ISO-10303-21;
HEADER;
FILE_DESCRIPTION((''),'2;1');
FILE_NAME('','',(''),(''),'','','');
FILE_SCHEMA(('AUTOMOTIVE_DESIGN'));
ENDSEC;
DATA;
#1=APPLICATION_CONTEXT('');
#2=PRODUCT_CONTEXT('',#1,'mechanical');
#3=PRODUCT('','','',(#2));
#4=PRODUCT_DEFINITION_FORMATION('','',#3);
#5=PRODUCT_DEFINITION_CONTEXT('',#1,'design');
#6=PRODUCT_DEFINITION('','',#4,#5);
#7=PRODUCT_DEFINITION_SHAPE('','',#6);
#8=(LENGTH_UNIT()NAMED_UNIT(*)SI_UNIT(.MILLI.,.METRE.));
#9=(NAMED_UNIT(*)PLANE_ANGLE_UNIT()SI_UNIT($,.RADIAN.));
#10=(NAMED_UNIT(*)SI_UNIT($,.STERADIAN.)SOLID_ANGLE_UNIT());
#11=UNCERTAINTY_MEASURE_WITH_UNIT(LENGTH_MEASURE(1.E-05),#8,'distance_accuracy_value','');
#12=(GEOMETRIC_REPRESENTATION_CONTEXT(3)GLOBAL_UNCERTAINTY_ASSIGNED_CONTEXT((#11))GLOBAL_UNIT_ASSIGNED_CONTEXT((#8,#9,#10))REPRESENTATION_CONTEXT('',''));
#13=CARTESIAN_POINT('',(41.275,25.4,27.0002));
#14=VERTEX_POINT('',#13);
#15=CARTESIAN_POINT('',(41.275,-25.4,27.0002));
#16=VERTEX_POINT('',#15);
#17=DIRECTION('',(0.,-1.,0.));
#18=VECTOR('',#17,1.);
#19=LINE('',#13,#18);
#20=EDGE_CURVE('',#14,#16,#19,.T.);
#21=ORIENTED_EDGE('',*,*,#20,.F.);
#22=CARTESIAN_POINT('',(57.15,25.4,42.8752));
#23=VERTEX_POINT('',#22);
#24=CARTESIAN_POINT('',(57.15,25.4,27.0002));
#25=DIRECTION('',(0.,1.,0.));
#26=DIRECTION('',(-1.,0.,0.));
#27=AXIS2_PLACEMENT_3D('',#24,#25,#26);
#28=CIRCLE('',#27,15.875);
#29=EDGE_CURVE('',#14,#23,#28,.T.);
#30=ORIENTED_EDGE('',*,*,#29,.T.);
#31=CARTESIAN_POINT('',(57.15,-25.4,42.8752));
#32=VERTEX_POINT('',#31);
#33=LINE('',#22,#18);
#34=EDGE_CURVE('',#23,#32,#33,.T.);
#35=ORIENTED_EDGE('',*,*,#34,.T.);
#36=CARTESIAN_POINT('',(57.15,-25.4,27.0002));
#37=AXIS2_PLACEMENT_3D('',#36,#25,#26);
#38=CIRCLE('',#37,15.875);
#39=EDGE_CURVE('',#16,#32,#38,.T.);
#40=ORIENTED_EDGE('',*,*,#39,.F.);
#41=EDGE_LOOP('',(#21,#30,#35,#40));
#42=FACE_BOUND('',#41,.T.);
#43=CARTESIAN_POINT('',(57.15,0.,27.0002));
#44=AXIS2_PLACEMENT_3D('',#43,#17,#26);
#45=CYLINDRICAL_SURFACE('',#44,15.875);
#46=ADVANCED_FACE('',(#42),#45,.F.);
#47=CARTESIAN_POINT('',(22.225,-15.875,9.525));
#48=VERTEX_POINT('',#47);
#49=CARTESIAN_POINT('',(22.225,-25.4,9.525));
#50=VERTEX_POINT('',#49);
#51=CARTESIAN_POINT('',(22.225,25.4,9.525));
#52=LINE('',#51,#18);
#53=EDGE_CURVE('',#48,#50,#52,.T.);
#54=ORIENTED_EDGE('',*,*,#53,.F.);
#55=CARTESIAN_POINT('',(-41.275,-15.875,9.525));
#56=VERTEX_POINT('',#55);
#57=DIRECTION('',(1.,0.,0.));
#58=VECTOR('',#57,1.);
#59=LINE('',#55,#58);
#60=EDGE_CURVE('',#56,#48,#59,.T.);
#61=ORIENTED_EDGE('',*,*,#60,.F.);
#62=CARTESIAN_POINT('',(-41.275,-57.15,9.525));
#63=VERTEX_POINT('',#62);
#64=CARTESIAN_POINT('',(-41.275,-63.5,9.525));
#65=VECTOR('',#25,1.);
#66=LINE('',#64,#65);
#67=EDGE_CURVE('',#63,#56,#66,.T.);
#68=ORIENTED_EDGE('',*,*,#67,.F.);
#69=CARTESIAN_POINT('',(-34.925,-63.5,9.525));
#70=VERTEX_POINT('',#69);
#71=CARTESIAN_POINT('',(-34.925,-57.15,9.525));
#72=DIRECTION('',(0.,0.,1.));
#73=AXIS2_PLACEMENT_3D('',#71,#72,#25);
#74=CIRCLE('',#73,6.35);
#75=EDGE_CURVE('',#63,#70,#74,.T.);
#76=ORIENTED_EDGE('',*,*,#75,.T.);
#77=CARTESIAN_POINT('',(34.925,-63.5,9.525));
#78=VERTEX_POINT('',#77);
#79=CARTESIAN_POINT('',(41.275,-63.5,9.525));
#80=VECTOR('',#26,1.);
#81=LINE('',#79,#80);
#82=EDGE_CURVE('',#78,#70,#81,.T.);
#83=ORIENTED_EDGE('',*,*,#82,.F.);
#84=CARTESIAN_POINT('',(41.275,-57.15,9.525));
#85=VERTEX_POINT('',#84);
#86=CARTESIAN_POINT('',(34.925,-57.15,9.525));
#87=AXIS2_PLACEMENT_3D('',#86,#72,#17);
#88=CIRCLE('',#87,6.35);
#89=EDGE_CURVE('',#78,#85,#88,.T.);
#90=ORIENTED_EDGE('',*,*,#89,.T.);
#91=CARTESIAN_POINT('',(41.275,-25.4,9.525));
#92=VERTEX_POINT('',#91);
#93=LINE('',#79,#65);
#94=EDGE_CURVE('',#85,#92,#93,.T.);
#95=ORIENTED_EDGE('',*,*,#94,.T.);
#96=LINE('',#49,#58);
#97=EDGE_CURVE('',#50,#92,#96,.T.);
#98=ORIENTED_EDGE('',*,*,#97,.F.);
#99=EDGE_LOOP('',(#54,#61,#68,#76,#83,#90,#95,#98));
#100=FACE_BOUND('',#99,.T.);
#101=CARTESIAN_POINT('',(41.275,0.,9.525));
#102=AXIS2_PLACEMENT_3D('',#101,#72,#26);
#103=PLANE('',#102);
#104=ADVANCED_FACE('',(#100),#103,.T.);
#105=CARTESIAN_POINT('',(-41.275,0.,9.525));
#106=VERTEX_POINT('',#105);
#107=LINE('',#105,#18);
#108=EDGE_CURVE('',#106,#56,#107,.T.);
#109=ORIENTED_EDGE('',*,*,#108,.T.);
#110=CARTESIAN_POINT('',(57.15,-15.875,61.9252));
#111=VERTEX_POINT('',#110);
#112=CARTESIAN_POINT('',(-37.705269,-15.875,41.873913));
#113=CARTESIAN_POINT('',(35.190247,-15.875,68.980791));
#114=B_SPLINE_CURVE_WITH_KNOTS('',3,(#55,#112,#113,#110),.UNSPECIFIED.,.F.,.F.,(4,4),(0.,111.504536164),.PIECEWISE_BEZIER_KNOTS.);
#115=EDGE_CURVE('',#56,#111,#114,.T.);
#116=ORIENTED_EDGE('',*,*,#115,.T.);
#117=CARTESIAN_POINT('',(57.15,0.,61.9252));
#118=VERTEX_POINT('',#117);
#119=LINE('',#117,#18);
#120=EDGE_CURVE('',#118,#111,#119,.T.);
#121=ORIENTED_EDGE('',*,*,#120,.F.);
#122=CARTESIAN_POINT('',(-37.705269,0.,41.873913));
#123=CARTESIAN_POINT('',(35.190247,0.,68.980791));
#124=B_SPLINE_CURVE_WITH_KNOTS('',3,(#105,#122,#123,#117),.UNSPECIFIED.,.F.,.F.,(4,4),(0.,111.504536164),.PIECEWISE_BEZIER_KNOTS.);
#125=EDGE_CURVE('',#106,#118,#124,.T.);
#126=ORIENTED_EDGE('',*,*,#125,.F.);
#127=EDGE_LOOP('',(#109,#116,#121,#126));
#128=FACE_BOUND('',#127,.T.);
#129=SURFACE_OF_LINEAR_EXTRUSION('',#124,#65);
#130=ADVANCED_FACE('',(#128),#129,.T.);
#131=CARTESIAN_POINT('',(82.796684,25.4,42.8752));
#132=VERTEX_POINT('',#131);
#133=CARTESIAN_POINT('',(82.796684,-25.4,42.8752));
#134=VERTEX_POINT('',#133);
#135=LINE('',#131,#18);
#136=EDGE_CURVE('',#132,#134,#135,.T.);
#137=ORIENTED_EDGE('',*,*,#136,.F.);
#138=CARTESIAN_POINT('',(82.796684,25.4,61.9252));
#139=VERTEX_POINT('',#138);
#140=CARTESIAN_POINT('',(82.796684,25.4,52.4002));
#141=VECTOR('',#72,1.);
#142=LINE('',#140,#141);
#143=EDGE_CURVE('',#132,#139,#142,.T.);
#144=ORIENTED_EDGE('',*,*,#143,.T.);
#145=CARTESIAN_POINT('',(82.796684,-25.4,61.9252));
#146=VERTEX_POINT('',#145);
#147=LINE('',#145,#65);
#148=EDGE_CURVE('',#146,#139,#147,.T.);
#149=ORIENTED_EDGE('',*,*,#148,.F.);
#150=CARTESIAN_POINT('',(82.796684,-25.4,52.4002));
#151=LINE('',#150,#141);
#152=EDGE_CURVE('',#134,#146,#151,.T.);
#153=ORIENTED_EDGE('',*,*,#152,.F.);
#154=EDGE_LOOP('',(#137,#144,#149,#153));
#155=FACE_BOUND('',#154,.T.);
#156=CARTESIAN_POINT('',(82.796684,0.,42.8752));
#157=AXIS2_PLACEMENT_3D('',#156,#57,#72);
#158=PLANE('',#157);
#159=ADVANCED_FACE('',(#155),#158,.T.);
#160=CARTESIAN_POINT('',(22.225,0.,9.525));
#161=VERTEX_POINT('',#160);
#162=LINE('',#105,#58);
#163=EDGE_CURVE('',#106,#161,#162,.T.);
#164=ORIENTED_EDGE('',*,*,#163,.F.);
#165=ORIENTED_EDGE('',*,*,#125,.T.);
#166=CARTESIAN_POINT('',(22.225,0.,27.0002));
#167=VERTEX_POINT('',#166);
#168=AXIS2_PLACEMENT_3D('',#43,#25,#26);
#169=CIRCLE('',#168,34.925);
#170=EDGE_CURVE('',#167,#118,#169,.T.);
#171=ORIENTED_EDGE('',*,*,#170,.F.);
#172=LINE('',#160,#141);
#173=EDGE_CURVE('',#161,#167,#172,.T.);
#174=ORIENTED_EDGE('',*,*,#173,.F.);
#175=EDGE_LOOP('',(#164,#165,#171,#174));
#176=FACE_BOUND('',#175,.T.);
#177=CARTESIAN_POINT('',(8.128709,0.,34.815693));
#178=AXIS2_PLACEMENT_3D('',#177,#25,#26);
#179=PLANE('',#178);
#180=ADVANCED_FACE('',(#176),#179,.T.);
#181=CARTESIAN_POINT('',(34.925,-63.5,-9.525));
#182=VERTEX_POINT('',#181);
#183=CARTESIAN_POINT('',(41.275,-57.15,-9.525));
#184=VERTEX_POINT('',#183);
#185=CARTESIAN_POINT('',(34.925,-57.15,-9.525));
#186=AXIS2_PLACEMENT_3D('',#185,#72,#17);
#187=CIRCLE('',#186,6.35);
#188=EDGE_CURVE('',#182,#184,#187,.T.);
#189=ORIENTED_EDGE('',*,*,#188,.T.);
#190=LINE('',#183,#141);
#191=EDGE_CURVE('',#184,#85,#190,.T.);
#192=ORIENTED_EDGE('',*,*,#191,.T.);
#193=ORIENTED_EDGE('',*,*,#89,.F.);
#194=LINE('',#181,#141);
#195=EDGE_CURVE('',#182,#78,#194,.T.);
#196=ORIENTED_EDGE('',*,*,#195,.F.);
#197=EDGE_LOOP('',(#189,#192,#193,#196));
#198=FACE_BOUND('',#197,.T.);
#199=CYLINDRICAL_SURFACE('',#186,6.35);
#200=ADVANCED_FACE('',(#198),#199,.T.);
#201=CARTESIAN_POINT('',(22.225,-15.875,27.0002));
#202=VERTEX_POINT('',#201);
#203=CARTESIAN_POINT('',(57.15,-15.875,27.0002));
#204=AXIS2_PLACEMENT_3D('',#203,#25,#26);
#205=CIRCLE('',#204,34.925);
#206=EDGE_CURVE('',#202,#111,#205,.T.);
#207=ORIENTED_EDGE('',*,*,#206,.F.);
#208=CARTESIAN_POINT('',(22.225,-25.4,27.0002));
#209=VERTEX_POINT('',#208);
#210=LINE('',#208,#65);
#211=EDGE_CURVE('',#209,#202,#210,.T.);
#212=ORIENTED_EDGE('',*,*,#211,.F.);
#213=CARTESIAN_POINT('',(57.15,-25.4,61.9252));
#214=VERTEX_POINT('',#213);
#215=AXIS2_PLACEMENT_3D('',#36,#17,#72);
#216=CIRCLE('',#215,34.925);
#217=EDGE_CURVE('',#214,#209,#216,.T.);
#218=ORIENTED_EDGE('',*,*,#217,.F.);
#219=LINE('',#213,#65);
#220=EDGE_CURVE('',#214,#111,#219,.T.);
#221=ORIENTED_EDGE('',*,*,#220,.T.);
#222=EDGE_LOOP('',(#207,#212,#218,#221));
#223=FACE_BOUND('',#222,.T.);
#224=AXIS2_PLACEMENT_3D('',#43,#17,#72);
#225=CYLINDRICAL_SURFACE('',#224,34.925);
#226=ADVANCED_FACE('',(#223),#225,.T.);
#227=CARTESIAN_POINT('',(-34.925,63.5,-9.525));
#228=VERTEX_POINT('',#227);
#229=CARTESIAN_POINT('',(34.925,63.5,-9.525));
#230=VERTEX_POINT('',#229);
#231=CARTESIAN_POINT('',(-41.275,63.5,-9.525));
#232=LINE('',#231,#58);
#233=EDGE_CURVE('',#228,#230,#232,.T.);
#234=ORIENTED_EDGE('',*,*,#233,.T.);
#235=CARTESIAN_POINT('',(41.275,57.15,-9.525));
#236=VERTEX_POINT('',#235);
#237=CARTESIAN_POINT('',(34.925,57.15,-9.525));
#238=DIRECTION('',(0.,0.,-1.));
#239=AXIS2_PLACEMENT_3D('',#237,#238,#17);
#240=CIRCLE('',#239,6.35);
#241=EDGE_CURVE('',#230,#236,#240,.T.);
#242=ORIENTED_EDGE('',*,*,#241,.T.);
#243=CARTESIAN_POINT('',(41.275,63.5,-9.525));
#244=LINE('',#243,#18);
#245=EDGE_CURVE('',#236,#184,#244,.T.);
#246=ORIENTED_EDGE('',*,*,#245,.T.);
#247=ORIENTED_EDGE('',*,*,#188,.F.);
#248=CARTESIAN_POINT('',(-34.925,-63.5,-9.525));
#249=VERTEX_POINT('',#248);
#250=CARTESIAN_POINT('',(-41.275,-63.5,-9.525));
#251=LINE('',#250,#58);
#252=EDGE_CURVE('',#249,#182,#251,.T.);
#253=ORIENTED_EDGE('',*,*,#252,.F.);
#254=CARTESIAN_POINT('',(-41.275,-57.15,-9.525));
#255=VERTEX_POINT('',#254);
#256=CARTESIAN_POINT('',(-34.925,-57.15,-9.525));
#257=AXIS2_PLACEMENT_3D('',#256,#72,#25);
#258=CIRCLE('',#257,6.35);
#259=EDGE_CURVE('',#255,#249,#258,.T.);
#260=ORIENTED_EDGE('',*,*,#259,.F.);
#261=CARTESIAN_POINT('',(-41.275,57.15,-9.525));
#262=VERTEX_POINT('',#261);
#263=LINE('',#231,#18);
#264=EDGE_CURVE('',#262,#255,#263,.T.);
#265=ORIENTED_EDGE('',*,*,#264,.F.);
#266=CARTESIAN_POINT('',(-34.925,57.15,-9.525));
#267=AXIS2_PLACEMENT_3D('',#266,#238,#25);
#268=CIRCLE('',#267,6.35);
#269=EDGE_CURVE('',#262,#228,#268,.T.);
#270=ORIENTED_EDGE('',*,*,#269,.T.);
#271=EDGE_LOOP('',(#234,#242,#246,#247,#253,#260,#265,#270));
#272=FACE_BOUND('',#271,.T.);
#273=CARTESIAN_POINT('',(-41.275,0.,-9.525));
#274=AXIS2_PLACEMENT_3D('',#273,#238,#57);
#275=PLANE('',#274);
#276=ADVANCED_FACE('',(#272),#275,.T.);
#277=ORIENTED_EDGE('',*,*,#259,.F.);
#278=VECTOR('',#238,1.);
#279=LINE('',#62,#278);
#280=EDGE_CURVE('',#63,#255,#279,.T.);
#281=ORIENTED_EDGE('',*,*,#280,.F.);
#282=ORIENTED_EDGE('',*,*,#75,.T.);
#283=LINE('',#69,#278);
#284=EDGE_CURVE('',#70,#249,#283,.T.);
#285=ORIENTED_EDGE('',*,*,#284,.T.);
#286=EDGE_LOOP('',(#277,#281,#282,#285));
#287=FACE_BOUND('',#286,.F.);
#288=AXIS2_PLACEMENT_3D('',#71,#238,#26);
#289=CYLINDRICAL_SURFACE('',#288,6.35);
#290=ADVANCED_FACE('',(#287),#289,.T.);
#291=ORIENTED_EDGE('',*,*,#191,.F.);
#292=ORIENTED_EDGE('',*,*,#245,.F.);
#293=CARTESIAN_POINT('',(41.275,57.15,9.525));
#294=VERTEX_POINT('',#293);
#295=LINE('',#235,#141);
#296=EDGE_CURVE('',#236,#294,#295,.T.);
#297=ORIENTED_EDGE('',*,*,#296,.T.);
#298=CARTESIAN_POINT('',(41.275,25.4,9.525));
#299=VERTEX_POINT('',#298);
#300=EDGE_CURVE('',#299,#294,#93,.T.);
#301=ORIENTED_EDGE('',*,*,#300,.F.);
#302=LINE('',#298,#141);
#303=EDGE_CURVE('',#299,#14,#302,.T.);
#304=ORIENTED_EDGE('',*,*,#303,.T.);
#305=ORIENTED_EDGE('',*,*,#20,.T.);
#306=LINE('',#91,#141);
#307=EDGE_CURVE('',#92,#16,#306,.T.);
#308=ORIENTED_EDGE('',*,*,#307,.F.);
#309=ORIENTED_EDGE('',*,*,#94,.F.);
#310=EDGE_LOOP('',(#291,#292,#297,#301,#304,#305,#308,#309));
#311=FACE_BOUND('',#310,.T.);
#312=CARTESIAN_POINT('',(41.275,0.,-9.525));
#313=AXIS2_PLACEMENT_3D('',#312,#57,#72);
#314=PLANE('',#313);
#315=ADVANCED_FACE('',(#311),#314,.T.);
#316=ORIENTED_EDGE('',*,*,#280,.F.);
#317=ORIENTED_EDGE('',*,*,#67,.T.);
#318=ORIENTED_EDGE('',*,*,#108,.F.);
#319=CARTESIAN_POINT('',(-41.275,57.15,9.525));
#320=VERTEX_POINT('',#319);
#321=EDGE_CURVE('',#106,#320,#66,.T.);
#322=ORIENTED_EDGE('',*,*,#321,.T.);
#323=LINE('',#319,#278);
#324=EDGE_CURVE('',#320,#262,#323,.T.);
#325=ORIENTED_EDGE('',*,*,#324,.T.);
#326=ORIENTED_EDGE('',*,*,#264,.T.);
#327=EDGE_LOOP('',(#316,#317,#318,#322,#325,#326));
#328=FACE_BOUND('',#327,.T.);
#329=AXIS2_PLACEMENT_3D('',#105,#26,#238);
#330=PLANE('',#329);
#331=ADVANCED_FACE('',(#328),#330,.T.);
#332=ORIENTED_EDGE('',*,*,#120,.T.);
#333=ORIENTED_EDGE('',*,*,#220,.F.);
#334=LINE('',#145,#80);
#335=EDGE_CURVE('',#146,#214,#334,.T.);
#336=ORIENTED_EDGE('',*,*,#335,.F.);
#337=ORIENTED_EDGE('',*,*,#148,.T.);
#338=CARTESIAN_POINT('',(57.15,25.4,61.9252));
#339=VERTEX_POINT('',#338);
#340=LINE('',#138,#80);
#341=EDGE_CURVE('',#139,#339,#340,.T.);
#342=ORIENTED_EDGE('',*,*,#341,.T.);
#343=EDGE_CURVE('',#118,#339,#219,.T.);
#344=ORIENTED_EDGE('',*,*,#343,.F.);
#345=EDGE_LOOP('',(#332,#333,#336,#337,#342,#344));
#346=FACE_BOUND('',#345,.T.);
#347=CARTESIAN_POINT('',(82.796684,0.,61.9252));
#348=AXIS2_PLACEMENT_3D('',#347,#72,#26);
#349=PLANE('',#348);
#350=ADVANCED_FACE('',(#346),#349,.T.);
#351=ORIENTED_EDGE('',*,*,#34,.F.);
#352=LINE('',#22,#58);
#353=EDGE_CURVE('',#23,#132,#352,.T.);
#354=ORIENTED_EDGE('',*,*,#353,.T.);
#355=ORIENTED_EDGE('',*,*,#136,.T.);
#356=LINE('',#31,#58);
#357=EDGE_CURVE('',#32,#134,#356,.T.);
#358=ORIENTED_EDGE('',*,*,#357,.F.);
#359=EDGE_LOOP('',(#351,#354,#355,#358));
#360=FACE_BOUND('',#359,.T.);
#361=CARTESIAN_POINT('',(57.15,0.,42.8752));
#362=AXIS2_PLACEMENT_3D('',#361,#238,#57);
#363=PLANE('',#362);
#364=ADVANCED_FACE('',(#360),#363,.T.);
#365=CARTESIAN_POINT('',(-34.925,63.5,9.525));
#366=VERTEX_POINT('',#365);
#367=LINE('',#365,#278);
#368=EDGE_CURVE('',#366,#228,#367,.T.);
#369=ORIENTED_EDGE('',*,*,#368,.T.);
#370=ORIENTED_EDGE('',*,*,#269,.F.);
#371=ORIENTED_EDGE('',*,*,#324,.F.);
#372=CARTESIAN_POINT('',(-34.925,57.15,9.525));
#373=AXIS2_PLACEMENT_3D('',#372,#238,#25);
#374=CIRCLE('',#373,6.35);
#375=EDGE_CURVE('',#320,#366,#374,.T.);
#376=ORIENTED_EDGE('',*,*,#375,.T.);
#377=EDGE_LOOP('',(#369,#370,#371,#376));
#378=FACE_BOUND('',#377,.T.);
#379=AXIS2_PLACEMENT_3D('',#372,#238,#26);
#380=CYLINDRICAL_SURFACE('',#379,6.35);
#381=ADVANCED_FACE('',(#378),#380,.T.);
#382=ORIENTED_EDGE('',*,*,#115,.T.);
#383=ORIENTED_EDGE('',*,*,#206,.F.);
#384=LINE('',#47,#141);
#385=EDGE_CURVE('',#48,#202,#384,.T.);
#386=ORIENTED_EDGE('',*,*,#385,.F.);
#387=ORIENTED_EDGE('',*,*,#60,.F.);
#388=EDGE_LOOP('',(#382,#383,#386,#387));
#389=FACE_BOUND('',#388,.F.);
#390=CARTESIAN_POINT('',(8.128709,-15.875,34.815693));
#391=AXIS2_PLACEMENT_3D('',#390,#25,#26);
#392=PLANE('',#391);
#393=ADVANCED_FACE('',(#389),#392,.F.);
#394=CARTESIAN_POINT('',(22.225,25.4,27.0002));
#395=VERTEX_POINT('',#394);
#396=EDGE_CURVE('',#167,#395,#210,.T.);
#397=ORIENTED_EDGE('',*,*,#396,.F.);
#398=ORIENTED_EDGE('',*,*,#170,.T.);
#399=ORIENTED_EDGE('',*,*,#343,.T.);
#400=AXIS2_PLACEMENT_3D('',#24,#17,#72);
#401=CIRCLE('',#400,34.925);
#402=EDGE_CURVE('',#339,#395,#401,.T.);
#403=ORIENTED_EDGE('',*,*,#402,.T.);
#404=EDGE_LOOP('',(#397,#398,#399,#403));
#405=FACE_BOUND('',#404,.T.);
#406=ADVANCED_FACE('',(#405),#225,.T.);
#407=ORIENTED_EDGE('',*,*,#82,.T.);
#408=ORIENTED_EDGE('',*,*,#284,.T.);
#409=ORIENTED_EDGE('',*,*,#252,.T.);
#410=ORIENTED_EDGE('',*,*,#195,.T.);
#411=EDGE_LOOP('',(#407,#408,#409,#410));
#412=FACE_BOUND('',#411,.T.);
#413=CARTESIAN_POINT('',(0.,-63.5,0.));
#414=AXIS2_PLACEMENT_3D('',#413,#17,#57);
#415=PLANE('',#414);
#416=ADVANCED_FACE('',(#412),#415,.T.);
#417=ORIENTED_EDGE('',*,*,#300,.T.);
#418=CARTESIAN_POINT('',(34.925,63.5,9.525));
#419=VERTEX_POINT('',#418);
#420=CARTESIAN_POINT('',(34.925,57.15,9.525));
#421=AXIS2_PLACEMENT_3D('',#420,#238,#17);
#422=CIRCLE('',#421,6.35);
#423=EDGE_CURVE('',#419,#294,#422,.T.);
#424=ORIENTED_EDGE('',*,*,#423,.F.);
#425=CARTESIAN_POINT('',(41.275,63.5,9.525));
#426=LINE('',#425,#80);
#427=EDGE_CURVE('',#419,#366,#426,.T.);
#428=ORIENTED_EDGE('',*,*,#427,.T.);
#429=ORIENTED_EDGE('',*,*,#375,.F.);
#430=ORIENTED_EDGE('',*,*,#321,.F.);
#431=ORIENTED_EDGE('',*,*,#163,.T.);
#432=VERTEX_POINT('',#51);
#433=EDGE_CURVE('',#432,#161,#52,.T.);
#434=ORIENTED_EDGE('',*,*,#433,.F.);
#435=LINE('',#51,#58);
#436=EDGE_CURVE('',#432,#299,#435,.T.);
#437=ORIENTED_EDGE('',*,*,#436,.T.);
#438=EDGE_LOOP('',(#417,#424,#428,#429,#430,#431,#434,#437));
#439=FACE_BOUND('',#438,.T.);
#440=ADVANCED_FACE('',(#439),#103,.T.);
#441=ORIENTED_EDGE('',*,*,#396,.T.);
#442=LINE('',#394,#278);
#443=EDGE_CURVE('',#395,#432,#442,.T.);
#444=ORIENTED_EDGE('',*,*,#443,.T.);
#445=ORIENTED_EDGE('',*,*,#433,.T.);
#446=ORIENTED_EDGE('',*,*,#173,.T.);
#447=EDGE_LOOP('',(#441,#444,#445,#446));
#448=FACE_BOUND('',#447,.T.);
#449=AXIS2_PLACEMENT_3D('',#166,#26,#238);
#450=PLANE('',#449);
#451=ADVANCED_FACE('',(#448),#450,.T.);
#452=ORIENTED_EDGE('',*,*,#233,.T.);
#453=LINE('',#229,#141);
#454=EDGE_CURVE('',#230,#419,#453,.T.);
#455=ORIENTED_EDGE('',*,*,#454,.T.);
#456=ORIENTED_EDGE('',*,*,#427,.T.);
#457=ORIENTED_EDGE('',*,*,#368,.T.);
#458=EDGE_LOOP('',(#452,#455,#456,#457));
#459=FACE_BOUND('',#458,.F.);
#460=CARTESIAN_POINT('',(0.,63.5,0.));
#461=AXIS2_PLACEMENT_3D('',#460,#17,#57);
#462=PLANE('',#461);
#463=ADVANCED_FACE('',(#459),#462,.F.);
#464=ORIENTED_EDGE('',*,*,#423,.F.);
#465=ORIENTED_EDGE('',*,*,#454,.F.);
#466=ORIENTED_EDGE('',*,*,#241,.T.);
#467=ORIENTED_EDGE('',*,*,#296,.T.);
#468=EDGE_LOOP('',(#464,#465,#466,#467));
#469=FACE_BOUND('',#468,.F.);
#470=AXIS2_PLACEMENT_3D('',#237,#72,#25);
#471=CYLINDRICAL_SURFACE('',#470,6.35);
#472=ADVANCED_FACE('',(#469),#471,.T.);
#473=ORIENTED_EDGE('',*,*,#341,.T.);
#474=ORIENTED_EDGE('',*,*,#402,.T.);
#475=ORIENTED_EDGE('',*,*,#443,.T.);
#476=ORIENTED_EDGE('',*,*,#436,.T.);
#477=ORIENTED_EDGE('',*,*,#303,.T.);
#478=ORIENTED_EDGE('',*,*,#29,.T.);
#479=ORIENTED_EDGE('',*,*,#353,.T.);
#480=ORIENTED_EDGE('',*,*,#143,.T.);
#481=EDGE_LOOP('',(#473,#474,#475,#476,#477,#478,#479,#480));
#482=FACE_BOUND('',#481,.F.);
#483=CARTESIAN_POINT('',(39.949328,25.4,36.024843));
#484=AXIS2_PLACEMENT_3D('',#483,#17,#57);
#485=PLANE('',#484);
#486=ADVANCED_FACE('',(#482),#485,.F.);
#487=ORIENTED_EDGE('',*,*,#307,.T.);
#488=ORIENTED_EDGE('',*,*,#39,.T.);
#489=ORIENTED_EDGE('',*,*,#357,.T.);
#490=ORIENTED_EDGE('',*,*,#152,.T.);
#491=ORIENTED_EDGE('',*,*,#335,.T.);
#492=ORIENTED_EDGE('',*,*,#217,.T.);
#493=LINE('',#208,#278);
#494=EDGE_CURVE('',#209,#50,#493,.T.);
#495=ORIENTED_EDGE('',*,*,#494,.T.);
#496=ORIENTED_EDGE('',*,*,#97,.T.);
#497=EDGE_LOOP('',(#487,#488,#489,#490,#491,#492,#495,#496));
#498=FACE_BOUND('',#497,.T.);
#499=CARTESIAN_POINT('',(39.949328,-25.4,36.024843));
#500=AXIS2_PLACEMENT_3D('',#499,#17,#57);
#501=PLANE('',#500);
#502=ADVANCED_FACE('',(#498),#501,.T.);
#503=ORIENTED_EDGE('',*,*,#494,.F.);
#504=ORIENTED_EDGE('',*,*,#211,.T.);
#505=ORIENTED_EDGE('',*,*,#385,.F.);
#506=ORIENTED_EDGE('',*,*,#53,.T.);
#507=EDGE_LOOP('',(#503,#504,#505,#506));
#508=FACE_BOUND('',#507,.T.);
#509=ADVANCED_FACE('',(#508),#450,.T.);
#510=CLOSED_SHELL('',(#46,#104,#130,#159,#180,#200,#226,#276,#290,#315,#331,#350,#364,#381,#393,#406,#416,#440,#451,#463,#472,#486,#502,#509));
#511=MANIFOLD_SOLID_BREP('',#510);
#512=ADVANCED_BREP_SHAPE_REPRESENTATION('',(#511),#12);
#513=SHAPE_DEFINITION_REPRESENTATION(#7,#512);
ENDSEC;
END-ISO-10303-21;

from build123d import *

# Parameters (mm, degrees)
F1_DEPTH = 63.5
F0_W     = 22.4716843884
F0_H     = 19.05
F2_DEPTH = 25.4
F3_DEPTH = 15.875
F5_R     = 6.35


# Not quite as in the source:
# - the program builds the solid bodies; features that only make, move or delete a surface that nothing else refers to are left out


with BuildPart() as f1:
    # F0 (on Front) → F1 (new body, symmetric)
    with BuildSketch(Plane.XZ):
        Polygon((22.225, 9.525), (-41.275, 9.525), (-41.275, -9.525), (41.275, -9.525), (41.275, 9.525), align=None)
    extrude(amount=F1_DEPTH, both=True)

    # F0 (on Front) → F2 (join, symmetric)
    with BuildSketch(Plane.XZ):
        with BuildLine():
            Line((22.225, 27.0002), (22.225, 9.525))
            Line((22.225, 9.525), (41.275, 9.525))
            Line((41.275, 9.525), (41.275, 27.0002))
            ThreePointArc((41.275, 27.0002), (45.9246798487, 38.2255201513), (57.15, 42.8752))
            Line((57.15, 42.8752), (60.325, 42.8752))
            Line((60.325, 42.8752), (60.325, 61.9252))
            Line((60.325, 61.9252), (57.15, 61.9252))
            ThreePointArc((57.15, 61.9252), (32.4542956671, 51.6959043329), (22.225, 27.0002))
        make_face()
        with Locations((71.5608421942, 52.4002)):
            Rectangle(F0_W, F0_H)
    extrude(amount=F2_DEPTH, both=True)

    # F0 (on Front) → F3 (join)
    with BuildSketch(Plane.XZ):
        with BuildLine():
            add(Edge.make_bspline(
                [(-41.275, 9.525), (-37.7052687109, 41.8739132583), (35.1902469993, 68.9807906747), (57.15, 61.9252)],
                knots=[0, 0, 0, 0, 111.5045361635, 111.5045361635, 111.5045361635, 111.5045361635], degree=3))
            Line((-41.275, 9.525), (22.225, 9.525))
            Line((22.225, 9.525), (22.225, 27.0002))
            ThreePointArc((22.225, 27.0002), (32.4542956671, 51.6959043329), (57.15, 61.9252))
        make_face()
    extrude(amount=F3_DEPTH)

    # F5
    f5_edges = [f1.edges().sort_by_distance(p)[0] for p in [
        (41.275, -63.5, 0),
        (-41.275, -63.5, 0),
        (-41.275, 63.5, 0),
        (41.275, 63.5, 0),
    ]]
    fillet(f5_edges, radius=F5_R)


solid = f1.part
